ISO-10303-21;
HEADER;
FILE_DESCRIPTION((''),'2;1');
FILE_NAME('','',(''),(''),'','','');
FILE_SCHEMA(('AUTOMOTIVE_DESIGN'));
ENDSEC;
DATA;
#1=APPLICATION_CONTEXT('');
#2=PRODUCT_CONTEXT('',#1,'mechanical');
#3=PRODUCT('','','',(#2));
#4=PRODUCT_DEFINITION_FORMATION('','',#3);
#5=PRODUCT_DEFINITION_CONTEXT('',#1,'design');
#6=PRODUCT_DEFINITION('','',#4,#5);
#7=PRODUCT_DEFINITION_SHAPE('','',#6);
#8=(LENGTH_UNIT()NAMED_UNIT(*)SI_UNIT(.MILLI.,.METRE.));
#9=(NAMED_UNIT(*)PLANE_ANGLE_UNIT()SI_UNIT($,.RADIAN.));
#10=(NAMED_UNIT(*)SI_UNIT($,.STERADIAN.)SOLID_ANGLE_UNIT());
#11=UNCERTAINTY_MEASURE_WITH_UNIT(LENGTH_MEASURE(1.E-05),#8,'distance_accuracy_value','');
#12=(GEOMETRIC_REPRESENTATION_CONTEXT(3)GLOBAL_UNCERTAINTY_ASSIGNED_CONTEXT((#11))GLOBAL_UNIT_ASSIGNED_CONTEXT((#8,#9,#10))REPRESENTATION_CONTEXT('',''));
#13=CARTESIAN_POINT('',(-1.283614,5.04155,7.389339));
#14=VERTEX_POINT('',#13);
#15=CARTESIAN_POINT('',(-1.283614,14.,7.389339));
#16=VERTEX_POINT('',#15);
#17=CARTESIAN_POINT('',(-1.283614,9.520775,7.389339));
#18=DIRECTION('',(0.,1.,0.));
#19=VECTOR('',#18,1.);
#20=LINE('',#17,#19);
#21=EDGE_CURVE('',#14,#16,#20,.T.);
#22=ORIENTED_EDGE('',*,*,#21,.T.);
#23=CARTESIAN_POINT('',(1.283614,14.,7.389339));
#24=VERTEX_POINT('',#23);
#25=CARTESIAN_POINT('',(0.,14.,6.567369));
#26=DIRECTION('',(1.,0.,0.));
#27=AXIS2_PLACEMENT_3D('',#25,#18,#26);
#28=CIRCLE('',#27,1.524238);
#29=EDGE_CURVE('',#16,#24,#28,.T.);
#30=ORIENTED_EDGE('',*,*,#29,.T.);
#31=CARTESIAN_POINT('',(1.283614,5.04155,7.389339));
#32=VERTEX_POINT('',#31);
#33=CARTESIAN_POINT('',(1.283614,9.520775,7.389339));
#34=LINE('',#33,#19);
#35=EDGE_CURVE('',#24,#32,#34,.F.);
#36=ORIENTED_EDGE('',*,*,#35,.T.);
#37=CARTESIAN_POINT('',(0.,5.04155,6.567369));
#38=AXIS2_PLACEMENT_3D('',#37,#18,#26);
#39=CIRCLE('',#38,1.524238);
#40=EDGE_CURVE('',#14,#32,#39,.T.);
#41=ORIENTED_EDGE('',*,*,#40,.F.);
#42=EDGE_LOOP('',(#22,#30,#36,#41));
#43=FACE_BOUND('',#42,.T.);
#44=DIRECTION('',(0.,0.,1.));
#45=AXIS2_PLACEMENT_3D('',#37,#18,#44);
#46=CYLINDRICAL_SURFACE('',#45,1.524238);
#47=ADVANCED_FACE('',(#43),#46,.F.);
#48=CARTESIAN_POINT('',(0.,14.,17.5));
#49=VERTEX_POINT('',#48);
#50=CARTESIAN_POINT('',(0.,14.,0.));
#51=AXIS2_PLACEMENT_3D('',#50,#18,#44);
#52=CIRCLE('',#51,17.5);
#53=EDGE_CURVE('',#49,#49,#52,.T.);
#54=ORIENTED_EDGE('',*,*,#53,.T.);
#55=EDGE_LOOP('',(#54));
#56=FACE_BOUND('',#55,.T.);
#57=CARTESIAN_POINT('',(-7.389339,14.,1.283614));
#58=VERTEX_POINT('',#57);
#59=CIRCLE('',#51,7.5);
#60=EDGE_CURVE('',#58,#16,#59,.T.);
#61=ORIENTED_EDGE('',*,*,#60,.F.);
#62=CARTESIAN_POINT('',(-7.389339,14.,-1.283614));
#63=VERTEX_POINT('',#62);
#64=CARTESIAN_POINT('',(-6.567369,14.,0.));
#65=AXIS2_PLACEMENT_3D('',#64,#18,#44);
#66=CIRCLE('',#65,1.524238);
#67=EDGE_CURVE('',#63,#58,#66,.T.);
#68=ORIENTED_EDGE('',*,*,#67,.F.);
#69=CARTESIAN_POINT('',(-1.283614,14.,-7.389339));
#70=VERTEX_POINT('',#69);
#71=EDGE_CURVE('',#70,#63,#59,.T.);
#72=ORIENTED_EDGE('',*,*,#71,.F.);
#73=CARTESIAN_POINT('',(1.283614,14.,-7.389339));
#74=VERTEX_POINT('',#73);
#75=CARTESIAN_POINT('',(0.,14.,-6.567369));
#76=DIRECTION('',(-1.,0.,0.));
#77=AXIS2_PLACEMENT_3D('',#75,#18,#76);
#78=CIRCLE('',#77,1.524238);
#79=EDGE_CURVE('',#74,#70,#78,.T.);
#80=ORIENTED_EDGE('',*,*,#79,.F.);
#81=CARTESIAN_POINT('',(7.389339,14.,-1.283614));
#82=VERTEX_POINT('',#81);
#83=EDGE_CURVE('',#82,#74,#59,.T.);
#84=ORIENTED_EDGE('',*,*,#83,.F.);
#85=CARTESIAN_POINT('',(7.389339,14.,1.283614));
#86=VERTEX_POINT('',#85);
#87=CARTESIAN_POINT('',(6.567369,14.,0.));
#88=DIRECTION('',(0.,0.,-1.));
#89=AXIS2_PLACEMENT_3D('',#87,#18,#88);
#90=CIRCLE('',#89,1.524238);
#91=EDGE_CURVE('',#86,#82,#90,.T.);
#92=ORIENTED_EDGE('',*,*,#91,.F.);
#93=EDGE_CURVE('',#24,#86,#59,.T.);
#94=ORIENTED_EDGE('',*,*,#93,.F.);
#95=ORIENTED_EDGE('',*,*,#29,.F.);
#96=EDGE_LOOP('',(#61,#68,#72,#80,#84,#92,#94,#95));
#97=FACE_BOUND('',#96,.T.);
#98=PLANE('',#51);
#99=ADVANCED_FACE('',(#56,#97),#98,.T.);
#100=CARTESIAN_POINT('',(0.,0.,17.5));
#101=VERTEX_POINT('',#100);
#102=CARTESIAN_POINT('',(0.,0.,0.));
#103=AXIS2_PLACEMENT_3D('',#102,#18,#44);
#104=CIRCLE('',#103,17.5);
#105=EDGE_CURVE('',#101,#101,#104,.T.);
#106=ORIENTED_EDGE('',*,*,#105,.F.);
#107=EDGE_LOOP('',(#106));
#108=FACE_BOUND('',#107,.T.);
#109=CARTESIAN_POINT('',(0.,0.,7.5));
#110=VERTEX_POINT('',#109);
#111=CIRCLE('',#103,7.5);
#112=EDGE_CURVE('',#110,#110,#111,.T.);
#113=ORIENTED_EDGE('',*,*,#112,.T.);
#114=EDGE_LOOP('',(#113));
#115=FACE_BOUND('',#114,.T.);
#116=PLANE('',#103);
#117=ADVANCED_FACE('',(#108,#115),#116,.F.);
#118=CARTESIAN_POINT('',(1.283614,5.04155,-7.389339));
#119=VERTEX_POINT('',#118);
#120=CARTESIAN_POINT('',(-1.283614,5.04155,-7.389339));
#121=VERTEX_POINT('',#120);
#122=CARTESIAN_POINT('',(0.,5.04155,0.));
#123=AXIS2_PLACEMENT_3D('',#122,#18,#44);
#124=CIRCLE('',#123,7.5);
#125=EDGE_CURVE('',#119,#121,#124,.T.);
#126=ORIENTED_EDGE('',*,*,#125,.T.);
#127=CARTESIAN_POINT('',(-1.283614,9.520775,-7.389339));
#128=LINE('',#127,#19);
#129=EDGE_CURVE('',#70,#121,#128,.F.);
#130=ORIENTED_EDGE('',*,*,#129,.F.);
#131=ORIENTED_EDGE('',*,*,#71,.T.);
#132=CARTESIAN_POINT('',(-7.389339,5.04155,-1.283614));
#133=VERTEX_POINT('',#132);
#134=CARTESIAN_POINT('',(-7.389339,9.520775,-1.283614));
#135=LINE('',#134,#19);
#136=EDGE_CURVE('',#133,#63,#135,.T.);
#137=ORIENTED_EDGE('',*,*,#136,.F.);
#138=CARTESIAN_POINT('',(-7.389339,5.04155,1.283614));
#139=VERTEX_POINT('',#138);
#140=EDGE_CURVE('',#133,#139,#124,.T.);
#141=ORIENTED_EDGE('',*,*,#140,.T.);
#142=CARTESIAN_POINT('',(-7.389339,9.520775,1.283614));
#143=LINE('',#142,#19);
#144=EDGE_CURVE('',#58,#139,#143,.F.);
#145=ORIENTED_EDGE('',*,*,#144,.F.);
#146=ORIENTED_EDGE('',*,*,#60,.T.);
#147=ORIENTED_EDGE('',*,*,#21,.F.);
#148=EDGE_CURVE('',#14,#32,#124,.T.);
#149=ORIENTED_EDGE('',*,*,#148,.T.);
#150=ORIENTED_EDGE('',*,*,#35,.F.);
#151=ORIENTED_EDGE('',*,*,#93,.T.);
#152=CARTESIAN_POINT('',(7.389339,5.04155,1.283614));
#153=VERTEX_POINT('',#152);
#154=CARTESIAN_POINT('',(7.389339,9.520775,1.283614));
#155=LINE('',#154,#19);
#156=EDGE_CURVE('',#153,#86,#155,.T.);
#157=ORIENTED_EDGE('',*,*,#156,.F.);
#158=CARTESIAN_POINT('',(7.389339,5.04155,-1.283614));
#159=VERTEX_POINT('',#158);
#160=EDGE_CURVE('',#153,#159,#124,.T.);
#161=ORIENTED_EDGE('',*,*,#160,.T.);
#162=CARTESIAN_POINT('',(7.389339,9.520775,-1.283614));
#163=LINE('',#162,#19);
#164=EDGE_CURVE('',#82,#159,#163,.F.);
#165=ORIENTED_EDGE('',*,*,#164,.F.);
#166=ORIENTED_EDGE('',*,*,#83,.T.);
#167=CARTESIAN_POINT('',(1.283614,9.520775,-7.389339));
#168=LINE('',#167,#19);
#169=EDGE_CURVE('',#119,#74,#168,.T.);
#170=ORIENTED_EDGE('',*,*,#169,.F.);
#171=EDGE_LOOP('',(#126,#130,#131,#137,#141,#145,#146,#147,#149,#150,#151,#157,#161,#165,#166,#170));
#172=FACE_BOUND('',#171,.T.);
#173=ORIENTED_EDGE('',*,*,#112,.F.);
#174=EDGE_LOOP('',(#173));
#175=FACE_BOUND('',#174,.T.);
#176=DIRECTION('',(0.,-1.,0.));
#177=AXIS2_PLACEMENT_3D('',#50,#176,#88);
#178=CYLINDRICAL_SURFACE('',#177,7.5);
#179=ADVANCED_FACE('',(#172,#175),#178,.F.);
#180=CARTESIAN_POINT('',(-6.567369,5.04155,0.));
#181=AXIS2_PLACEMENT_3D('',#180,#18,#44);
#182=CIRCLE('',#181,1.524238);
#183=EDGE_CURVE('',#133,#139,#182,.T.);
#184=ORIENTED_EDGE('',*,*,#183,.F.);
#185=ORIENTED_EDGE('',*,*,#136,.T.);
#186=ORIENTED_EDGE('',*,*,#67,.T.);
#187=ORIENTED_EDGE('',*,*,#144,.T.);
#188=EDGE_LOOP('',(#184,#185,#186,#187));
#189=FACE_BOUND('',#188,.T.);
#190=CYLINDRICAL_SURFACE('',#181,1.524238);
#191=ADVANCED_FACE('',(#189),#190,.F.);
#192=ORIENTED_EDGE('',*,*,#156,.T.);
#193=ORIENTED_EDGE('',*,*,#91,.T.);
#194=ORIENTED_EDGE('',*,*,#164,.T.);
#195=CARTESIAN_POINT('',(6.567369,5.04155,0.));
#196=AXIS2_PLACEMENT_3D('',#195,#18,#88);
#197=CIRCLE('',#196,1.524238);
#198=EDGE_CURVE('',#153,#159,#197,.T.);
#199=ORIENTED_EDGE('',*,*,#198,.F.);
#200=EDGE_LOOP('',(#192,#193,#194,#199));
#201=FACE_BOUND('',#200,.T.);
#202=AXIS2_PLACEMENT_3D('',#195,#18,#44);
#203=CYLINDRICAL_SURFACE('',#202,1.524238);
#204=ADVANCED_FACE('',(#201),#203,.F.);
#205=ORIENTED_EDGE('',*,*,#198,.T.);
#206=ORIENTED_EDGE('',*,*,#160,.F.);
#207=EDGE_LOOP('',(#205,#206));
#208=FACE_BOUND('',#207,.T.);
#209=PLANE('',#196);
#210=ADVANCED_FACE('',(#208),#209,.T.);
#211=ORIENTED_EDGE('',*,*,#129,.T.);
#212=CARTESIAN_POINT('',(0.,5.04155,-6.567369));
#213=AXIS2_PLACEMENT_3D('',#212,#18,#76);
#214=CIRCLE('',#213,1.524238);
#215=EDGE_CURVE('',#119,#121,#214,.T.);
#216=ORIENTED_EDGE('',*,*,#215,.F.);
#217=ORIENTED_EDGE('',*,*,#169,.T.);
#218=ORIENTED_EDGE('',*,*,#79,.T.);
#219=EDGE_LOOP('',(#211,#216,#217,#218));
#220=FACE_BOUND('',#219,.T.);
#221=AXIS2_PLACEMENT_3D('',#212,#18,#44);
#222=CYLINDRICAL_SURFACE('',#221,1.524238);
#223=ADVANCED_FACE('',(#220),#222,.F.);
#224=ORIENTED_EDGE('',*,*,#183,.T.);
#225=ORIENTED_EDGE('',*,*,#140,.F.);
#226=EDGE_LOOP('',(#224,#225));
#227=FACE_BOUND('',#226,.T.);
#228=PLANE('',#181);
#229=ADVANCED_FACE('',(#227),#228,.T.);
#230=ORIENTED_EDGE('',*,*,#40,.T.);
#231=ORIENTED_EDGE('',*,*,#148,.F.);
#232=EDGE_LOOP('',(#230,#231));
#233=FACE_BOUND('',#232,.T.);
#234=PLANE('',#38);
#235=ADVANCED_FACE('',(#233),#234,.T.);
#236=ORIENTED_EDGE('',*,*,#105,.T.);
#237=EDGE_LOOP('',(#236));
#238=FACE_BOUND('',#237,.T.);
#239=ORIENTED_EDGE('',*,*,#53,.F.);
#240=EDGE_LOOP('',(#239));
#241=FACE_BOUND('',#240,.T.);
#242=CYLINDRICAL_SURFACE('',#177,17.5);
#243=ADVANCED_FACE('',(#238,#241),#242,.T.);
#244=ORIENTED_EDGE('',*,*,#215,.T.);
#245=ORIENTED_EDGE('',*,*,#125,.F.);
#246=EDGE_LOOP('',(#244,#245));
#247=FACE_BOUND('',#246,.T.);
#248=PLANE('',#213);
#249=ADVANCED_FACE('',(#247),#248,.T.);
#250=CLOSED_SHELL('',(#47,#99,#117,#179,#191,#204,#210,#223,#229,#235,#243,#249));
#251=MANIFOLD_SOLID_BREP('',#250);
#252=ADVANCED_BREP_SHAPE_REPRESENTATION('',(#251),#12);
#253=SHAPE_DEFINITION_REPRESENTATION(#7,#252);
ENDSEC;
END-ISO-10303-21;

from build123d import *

# Parameters (mm, degrees)
SKETCH1_R           = 17.5
BOSS_EXTRUDE1_DEPTH = 14
SKETCH2_R           = 7.5
CUT_EXTRUDE1_DEPTH  = 29.434134416
SKETCH3_R           = 1.524237751
CUT_EXTRUDE2_DEPTH  = 8.958449647
CIRPATTERN1_COUNT   = 4


with BuildPart() as part:
    # Sketch1 → Boss-Extrude1 (new body)
    with BuildSketch(Plane(origin=(0, 0, 0), x_dir=(1, 0, 0), z_dir=(0, 1, 0))):
        Circle(SKETCH1_R)
    extrude(amount=BOSS_EXTRUDE1_DEPTH)

    # Sketch2 → Cut-Extrude1 (cut, through all)
    with BuildSketch(Plane(origin=(0, 0, 0), x_dir=(1, 0, 0), z_dir=(0, 1, 0))):
        Circle(SKETCH2_R)
    extrude(amount=CUT_EXTRUDE1_DEPTH, mode=Mode.SUBTRACT)

    # Sketch3 → Cut-Extrude2 (cut)
    with BuildSketch(Plane(origin=(0, 14, 0), x_dir=(1, 0, 0), z_dir=(0, 1, 0))):
        with Locations((-6.567368859, 0)):
            Circle(SKETCH3_R)
    cut_extrude2 = extrude(amount=-CUT_EXTRUDE2_DEPTH, mode=Mode.SUBTRACT)

    # CirPattern1: Cut-Extrude2 ×4 about axis
    cirpattern1_axis = Axis((0, 0, 0), (0, 1, 0))
    for i in range(1, CIRPATTERN1_COUNT):
        add(cut_extrude2.rotate(cirpattern1_axis, i * 360 / CIRPATTERN1_COUNT), mode=Mode.SUBTRACT)


solid = part.part
